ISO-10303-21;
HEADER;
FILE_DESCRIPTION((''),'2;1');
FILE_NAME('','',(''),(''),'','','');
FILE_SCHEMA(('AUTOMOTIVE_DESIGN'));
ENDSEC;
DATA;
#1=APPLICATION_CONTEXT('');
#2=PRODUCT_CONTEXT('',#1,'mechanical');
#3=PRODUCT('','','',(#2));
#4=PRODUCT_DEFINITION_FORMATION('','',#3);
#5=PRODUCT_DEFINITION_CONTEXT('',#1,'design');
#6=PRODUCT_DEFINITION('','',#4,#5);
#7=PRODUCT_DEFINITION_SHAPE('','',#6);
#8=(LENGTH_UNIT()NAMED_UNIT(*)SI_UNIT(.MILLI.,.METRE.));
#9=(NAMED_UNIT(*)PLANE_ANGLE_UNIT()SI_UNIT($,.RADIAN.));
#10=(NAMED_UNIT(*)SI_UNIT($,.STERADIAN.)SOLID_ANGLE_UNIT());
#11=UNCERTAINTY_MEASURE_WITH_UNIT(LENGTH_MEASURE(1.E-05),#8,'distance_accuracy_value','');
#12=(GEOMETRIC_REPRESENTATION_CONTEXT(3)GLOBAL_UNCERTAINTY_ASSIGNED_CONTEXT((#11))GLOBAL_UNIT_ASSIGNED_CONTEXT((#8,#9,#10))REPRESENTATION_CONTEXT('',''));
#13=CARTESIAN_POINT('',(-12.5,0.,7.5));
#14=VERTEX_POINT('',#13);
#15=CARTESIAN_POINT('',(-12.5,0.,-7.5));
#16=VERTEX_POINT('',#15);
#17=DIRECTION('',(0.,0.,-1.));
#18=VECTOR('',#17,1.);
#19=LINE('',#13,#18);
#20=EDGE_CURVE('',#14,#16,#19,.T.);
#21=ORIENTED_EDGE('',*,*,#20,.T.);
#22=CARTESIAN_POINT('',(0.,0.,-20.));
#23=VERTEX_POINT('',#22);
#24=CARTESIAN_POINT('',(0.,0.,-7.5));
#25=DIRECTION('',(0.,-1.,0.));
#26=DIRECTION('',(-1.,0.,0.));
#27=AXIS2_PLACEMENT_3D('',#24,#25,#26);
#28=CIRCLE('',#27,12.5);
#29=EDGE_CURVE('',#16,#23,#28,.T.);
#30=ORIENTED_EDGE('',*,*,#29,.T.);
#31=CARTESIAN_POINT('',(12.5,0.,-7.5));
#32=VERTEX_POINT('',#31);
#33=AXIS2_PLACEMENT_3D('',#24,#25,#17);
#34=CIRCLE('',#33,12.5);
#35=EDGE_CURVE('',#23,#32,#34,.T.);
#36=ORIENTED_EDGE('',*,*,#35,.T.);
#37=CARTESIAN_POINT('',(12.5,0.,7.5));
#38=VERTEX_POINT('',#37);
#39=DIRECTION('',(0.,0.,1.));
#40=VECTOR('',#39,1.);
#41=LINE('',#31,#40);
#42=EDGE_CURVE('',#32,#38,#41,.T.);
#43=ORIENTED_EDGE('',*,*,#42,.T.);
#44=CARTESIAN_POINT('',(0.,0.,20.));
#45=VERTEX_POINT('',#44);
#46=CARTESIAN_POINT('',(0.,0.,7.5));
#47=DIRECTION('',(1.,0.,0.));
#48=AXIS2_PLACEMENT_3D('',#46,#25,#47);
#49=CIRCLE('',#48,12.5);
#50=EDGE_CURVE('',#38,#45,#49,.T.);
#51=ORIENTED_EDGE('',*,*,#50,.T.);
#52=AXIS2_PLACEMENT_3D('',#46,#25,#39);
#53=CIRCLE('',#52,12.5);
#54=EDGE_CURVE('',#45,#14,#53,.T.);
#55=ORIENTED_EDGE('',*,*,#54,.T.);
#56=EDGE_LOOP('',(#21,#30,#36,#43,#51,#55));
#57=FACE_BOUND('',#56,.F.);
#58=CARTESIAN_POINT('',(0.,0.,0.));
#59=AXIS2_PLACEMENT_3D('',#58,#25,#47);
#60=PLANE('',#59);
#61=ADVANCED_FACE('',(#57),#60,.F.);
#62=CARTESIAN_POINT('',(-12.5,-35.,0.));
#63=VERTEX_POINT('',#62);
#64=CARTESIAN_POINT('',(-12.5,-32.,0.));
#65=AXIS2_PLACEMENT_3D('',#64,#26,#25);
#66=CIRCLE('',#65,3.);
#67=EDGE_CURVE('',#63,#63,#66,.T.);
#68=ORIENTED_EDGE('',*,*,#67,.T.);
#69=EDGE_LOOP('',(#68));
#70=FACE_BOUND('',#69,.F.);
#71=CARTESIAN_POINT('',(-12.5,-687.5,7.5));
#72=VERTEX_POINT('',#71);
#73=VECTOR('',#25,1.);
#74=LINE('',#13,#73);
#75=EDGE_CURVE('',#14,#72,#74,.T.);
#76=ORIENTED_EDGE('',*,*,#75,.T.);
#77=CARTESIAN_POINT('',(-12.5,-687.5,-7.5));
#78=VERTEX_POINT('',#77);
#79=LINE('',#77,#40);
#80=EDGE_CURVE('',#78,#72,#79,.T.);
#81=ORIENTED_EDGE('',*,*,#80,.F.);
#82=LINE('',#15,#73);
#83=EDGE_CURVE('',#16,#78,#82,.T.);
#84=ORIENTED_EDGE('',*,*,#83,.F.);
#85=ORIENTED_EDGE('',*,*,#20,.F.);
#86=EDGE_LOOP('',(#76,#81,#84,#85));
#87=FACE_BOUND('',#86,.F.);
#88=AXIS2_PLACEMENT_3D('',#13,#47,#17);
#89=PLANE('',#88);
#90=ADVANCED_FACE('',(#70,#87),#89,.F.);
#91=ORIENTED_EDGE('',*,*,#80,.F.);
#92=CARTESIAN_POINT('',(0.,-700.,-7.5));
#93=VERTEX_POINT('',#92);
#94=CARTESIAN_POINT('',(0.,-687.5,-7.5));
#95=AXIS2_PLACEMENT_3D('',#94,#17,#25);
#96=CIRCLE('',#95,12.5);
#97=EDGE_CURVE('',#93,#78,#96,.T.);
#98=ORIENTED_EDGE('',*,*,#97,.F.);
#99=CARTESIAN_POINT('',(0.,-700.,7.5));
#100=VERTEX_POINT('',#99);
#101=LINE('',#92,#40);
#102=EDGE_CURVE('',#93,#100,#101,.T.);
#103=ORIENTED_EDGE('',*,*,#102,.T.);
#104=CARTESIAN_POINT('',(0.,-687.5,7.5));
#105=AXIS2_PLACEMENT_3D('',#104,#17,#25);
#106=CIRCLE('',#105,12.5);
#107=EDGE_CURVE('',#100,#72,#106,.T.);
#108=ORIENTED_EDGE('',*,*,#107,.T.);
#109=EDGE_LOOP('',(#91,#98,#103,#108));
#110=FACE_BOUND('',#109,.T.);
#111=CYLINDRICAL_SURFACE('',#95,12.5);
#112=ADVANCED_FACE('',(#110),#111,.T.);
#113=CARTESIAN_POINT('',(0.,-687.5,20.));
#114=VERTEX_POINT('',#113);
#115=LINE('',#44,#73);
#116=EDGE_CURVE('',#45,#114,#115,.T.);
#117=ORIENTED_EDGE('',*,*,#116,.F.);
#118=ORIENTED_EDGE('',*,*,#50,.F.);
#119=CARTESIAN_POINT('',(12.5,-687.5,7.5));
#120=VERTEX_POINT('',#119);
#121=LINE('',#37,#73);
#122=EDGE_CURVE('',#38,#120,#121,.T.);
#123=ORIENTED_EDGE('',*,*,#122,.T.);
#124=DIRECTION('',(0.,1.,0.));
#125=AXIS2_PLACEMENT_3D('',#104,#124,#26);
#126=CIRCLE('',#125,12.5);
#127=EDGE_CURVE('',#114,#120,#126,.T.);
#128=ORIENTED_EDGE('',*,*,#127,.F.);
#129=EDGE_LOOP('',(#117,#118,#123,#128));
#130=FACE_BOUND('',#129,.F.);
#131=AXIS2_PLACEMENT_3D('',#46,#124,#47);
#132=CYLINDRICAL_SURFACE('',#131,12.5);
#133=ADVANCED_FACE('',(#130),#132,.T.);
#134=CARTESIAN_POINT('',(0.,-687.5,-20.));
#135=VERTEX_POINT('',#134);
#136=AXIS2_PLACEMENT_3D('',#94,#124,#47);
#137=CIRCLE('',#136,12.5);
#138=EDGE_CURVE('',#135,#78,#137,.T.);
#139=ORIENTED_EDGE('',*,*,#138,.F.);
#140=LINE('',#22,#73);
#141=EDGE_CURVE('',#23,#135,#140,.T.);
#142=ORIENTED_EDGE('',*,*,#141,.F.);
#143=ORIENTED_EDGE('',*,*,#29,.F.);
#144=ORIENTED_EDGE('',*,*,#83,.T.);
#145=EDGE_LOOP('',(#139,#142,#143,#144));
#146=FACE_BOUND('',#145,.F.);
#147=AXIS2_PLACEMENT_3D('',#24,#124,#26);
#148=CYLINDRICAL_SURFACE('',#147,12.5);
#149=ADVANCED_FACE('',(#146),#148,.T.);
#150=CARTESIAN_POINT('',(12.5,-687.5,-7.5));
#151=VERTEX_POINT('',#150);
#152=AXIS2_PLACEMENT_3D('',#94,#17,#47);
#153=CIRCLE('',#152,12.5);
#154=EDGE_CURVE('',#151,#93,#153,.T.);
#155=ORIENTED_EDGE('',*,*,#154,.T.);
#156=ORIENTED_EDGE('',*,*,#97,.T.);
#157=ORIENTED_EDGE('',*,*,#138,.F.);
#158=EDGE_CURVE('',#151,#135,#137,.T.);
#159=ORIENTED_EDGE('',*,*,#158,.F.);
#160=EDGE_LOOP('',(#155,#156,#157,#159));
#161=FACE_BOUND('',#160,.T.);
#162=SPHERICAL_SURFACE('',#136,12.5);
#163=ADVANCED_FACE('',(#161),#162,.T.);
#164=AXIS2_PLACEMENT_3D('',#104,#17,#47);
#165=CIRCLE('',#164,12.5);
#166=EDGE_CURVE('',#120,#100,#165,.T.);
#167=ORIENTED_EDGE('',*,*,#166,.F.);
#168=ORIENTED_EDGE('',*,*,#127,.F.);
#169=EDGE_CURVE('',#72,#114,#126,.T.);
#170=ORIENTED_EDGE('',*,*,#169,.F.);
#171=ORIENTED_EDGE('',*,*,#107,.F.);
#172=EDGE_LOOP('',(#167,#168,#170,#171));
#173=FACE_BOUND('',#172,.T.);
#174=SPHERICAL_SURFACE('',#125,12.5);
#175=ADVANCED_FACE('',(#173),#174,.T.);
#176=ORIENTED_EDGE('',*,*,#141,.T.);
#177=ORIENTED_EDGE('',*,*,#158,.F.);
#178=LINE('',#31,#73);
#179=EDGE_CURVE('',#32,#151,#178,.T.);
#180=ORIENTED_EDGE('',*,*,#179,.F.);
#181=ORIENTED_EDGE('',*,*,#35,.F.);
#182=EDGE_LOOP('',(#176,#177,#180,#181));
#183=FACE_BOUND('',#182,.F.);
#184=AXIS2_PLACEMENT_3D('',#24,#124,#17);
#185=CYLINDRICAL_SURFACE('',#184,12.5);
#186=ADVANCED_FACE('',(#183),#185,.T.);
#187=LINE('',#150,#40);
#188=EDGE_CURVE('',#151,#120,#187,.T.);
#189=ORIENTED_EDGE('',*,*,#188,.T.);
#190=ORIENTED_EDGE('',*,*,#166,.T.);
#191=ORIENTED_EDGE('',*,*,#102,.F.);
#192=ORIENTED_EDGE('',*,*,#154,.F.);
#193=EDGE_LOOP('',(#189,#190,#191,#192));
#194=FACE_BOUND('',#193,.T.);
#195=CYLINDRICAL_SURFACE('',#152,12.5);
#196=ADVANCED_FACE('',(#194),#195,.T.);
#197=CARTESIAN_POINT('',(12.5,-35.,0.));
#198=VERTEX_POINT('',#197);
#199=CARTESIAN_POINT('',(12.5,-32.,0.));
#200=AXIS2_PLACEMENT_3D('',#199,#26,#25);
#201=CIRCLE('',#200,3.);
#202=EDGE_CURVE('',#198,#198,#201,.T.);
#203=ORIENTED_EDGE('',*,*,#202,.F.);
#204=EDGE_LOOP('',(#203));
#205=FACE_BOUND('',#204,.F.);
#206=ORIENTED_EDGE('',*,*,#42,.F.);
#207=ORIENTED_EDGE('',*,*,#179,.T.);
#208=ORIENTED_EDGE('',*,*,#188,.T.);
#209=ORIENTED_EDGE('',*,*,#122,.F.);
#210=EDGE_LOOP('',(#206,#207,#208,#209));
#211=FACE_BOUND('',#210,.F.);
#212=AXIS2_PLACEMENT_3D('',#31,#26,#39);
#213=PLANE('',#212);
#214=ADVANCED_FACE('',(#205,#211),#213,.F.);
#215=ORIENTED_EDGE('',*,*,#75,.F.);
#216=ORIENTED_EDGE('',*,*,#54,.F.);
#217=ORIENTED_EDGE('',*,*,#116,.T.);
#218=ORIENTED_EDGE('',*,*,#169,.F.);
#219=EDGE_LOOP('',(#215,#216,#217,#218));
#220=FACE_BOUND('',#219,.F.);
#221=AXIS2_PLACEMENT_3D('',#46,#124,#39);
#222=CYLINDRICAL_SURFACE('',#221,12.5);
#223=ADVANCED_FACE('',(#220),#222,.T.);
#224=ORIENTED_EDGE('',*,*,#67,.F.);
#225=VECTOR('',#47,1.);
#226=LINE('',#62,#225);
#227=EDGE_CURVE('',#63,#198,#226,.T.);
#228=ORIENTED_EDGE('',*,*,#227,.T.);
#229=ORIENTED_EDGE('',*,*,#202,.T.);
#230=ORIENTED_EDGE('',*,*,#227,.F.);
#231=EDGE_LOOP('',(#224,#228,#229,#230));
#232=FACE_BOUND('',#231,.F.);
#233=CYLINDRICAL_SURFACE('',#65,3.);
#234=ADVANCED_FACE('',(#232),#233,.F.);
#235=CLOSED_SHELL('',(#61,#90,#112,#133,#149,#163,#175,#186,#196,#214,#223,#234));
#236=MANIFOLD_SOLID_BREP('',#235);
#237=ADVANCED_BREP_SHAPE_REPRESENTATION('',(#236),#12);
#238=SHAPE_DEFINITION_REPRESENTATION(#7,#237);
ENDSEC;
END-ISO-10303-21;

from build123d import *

# Parameters (mm, degrees)
F1_DEPTH    = 700
F2_T1_DEPTH = 15
F2_T4_ANGLE = 180
F2_T6_ANGLE = 180
F3_R        = 3
F4_DEPTH    = 25.001


# Not quite as in the source:
# - a fillet or chamfer that OpenCascade refuses, or shapes differently, is made with other operations: its cross-section is extruded or revolved along the edge and cut away or added


with BuildPart() as f1:
    # F0 (on Front) → F1 (new body)
    with BuildSketch(Plane.XZ):
        with BuildLine():
            Line((12.5, -7.5), (12.5, 7.5))
            ThreePointArc((12.5, 7.5), (8.8388347648, 16.3388347648), (0, 20))
            ThreePointArc((0, 20), (-8.8388347648, 16.3388347648), (-12.5, 7.5))
            Line((-12.5, 7.5), (-12.5, -7.5))
            ThreePointArc((-12.5, -7.5), (-8.8388347648, -16.3388347648), (0, -20))
            ThreePointArc((0, -20), (8.8388347648, -16.3388347648), (12.5, -7.5))
        make_face()
    extrude(amount=F1_DEPTH)

    # F2: fillet of radius 12.5 on 4 edges, made by hand

    # F2_s2 → F2_t1 (cut)
    with BuildSketch(Plane.XY.offset(-7.5)):
        with BuildLine():
            ThreePointArc((12.5, -687.5), (8.8388347648, -696.3388347648), (0, -700))
            Line((0, -700), (12.5, -700))
            Line((12.5, -700), (12.5, -687.5))
        make_face()
        with BuildLine():
            ThreePointArc((0, -700), (-8.8388347648, -696.3388347648), (-12.5, -687.5))
            Line((-12.5, -687.5), (-12.5, -700))
            Line((-12.5, -700), (0, -700))
        make_face()
    extrude(amount=F2_T1_DEPTH, mode=Mode.SUBTRACT)

    # F2_s3 → F2_t4 (revolve, cut)
    with BuildSketch(Plane.XY.offset(-7.5)):
        with BuildLine():
            ThreePointArc((0, -700), (8.8388347648, -696.3388347648), (12.5, -687.5))
            Line((12.5, -687.5), (12.5, -700))
            Line((12.5, -700), (0, -700))
        make_face()
    revolve(axis=Axis((0, -700, -7.5), (0, 1, 0)), revolution_arc=F2_T4_ANGLE, mode=Mode.SUBTRACT)

    # F2_s5 → F2_t6 (revolve, cut)
    with BuildSketch(Plane.XY.offset(7.5)):
        with BuildLine():
            ThreePointArc((0, -700), (-8.8388347648, -696.3388347648), (-12.5, -687.5))
            Line((-12.5, -687.5), (-12.5, -700))
            Line((-12.5, -700), (0, -700))
        make_face()
    revolve(axis=Axis((0, -700, 7.5), (0, 1, 0)), revolution_arc=F2_T6_ANGLE, mode=Mode.SUBTRACT)

    # F3 (on face) → F4 (cut, through all)
    with BuildSketch(Plane(origin=(-12.5, 0, 0), x_dir=(0, -1, 0), z_dir=(-1, 0, 0))):
        with Locations((32, 0)):
            Circle(F3_R)
    extrude(amount=-F4_DEPTH, mode=Mode.SUBTRACT)


solid = f1.part
